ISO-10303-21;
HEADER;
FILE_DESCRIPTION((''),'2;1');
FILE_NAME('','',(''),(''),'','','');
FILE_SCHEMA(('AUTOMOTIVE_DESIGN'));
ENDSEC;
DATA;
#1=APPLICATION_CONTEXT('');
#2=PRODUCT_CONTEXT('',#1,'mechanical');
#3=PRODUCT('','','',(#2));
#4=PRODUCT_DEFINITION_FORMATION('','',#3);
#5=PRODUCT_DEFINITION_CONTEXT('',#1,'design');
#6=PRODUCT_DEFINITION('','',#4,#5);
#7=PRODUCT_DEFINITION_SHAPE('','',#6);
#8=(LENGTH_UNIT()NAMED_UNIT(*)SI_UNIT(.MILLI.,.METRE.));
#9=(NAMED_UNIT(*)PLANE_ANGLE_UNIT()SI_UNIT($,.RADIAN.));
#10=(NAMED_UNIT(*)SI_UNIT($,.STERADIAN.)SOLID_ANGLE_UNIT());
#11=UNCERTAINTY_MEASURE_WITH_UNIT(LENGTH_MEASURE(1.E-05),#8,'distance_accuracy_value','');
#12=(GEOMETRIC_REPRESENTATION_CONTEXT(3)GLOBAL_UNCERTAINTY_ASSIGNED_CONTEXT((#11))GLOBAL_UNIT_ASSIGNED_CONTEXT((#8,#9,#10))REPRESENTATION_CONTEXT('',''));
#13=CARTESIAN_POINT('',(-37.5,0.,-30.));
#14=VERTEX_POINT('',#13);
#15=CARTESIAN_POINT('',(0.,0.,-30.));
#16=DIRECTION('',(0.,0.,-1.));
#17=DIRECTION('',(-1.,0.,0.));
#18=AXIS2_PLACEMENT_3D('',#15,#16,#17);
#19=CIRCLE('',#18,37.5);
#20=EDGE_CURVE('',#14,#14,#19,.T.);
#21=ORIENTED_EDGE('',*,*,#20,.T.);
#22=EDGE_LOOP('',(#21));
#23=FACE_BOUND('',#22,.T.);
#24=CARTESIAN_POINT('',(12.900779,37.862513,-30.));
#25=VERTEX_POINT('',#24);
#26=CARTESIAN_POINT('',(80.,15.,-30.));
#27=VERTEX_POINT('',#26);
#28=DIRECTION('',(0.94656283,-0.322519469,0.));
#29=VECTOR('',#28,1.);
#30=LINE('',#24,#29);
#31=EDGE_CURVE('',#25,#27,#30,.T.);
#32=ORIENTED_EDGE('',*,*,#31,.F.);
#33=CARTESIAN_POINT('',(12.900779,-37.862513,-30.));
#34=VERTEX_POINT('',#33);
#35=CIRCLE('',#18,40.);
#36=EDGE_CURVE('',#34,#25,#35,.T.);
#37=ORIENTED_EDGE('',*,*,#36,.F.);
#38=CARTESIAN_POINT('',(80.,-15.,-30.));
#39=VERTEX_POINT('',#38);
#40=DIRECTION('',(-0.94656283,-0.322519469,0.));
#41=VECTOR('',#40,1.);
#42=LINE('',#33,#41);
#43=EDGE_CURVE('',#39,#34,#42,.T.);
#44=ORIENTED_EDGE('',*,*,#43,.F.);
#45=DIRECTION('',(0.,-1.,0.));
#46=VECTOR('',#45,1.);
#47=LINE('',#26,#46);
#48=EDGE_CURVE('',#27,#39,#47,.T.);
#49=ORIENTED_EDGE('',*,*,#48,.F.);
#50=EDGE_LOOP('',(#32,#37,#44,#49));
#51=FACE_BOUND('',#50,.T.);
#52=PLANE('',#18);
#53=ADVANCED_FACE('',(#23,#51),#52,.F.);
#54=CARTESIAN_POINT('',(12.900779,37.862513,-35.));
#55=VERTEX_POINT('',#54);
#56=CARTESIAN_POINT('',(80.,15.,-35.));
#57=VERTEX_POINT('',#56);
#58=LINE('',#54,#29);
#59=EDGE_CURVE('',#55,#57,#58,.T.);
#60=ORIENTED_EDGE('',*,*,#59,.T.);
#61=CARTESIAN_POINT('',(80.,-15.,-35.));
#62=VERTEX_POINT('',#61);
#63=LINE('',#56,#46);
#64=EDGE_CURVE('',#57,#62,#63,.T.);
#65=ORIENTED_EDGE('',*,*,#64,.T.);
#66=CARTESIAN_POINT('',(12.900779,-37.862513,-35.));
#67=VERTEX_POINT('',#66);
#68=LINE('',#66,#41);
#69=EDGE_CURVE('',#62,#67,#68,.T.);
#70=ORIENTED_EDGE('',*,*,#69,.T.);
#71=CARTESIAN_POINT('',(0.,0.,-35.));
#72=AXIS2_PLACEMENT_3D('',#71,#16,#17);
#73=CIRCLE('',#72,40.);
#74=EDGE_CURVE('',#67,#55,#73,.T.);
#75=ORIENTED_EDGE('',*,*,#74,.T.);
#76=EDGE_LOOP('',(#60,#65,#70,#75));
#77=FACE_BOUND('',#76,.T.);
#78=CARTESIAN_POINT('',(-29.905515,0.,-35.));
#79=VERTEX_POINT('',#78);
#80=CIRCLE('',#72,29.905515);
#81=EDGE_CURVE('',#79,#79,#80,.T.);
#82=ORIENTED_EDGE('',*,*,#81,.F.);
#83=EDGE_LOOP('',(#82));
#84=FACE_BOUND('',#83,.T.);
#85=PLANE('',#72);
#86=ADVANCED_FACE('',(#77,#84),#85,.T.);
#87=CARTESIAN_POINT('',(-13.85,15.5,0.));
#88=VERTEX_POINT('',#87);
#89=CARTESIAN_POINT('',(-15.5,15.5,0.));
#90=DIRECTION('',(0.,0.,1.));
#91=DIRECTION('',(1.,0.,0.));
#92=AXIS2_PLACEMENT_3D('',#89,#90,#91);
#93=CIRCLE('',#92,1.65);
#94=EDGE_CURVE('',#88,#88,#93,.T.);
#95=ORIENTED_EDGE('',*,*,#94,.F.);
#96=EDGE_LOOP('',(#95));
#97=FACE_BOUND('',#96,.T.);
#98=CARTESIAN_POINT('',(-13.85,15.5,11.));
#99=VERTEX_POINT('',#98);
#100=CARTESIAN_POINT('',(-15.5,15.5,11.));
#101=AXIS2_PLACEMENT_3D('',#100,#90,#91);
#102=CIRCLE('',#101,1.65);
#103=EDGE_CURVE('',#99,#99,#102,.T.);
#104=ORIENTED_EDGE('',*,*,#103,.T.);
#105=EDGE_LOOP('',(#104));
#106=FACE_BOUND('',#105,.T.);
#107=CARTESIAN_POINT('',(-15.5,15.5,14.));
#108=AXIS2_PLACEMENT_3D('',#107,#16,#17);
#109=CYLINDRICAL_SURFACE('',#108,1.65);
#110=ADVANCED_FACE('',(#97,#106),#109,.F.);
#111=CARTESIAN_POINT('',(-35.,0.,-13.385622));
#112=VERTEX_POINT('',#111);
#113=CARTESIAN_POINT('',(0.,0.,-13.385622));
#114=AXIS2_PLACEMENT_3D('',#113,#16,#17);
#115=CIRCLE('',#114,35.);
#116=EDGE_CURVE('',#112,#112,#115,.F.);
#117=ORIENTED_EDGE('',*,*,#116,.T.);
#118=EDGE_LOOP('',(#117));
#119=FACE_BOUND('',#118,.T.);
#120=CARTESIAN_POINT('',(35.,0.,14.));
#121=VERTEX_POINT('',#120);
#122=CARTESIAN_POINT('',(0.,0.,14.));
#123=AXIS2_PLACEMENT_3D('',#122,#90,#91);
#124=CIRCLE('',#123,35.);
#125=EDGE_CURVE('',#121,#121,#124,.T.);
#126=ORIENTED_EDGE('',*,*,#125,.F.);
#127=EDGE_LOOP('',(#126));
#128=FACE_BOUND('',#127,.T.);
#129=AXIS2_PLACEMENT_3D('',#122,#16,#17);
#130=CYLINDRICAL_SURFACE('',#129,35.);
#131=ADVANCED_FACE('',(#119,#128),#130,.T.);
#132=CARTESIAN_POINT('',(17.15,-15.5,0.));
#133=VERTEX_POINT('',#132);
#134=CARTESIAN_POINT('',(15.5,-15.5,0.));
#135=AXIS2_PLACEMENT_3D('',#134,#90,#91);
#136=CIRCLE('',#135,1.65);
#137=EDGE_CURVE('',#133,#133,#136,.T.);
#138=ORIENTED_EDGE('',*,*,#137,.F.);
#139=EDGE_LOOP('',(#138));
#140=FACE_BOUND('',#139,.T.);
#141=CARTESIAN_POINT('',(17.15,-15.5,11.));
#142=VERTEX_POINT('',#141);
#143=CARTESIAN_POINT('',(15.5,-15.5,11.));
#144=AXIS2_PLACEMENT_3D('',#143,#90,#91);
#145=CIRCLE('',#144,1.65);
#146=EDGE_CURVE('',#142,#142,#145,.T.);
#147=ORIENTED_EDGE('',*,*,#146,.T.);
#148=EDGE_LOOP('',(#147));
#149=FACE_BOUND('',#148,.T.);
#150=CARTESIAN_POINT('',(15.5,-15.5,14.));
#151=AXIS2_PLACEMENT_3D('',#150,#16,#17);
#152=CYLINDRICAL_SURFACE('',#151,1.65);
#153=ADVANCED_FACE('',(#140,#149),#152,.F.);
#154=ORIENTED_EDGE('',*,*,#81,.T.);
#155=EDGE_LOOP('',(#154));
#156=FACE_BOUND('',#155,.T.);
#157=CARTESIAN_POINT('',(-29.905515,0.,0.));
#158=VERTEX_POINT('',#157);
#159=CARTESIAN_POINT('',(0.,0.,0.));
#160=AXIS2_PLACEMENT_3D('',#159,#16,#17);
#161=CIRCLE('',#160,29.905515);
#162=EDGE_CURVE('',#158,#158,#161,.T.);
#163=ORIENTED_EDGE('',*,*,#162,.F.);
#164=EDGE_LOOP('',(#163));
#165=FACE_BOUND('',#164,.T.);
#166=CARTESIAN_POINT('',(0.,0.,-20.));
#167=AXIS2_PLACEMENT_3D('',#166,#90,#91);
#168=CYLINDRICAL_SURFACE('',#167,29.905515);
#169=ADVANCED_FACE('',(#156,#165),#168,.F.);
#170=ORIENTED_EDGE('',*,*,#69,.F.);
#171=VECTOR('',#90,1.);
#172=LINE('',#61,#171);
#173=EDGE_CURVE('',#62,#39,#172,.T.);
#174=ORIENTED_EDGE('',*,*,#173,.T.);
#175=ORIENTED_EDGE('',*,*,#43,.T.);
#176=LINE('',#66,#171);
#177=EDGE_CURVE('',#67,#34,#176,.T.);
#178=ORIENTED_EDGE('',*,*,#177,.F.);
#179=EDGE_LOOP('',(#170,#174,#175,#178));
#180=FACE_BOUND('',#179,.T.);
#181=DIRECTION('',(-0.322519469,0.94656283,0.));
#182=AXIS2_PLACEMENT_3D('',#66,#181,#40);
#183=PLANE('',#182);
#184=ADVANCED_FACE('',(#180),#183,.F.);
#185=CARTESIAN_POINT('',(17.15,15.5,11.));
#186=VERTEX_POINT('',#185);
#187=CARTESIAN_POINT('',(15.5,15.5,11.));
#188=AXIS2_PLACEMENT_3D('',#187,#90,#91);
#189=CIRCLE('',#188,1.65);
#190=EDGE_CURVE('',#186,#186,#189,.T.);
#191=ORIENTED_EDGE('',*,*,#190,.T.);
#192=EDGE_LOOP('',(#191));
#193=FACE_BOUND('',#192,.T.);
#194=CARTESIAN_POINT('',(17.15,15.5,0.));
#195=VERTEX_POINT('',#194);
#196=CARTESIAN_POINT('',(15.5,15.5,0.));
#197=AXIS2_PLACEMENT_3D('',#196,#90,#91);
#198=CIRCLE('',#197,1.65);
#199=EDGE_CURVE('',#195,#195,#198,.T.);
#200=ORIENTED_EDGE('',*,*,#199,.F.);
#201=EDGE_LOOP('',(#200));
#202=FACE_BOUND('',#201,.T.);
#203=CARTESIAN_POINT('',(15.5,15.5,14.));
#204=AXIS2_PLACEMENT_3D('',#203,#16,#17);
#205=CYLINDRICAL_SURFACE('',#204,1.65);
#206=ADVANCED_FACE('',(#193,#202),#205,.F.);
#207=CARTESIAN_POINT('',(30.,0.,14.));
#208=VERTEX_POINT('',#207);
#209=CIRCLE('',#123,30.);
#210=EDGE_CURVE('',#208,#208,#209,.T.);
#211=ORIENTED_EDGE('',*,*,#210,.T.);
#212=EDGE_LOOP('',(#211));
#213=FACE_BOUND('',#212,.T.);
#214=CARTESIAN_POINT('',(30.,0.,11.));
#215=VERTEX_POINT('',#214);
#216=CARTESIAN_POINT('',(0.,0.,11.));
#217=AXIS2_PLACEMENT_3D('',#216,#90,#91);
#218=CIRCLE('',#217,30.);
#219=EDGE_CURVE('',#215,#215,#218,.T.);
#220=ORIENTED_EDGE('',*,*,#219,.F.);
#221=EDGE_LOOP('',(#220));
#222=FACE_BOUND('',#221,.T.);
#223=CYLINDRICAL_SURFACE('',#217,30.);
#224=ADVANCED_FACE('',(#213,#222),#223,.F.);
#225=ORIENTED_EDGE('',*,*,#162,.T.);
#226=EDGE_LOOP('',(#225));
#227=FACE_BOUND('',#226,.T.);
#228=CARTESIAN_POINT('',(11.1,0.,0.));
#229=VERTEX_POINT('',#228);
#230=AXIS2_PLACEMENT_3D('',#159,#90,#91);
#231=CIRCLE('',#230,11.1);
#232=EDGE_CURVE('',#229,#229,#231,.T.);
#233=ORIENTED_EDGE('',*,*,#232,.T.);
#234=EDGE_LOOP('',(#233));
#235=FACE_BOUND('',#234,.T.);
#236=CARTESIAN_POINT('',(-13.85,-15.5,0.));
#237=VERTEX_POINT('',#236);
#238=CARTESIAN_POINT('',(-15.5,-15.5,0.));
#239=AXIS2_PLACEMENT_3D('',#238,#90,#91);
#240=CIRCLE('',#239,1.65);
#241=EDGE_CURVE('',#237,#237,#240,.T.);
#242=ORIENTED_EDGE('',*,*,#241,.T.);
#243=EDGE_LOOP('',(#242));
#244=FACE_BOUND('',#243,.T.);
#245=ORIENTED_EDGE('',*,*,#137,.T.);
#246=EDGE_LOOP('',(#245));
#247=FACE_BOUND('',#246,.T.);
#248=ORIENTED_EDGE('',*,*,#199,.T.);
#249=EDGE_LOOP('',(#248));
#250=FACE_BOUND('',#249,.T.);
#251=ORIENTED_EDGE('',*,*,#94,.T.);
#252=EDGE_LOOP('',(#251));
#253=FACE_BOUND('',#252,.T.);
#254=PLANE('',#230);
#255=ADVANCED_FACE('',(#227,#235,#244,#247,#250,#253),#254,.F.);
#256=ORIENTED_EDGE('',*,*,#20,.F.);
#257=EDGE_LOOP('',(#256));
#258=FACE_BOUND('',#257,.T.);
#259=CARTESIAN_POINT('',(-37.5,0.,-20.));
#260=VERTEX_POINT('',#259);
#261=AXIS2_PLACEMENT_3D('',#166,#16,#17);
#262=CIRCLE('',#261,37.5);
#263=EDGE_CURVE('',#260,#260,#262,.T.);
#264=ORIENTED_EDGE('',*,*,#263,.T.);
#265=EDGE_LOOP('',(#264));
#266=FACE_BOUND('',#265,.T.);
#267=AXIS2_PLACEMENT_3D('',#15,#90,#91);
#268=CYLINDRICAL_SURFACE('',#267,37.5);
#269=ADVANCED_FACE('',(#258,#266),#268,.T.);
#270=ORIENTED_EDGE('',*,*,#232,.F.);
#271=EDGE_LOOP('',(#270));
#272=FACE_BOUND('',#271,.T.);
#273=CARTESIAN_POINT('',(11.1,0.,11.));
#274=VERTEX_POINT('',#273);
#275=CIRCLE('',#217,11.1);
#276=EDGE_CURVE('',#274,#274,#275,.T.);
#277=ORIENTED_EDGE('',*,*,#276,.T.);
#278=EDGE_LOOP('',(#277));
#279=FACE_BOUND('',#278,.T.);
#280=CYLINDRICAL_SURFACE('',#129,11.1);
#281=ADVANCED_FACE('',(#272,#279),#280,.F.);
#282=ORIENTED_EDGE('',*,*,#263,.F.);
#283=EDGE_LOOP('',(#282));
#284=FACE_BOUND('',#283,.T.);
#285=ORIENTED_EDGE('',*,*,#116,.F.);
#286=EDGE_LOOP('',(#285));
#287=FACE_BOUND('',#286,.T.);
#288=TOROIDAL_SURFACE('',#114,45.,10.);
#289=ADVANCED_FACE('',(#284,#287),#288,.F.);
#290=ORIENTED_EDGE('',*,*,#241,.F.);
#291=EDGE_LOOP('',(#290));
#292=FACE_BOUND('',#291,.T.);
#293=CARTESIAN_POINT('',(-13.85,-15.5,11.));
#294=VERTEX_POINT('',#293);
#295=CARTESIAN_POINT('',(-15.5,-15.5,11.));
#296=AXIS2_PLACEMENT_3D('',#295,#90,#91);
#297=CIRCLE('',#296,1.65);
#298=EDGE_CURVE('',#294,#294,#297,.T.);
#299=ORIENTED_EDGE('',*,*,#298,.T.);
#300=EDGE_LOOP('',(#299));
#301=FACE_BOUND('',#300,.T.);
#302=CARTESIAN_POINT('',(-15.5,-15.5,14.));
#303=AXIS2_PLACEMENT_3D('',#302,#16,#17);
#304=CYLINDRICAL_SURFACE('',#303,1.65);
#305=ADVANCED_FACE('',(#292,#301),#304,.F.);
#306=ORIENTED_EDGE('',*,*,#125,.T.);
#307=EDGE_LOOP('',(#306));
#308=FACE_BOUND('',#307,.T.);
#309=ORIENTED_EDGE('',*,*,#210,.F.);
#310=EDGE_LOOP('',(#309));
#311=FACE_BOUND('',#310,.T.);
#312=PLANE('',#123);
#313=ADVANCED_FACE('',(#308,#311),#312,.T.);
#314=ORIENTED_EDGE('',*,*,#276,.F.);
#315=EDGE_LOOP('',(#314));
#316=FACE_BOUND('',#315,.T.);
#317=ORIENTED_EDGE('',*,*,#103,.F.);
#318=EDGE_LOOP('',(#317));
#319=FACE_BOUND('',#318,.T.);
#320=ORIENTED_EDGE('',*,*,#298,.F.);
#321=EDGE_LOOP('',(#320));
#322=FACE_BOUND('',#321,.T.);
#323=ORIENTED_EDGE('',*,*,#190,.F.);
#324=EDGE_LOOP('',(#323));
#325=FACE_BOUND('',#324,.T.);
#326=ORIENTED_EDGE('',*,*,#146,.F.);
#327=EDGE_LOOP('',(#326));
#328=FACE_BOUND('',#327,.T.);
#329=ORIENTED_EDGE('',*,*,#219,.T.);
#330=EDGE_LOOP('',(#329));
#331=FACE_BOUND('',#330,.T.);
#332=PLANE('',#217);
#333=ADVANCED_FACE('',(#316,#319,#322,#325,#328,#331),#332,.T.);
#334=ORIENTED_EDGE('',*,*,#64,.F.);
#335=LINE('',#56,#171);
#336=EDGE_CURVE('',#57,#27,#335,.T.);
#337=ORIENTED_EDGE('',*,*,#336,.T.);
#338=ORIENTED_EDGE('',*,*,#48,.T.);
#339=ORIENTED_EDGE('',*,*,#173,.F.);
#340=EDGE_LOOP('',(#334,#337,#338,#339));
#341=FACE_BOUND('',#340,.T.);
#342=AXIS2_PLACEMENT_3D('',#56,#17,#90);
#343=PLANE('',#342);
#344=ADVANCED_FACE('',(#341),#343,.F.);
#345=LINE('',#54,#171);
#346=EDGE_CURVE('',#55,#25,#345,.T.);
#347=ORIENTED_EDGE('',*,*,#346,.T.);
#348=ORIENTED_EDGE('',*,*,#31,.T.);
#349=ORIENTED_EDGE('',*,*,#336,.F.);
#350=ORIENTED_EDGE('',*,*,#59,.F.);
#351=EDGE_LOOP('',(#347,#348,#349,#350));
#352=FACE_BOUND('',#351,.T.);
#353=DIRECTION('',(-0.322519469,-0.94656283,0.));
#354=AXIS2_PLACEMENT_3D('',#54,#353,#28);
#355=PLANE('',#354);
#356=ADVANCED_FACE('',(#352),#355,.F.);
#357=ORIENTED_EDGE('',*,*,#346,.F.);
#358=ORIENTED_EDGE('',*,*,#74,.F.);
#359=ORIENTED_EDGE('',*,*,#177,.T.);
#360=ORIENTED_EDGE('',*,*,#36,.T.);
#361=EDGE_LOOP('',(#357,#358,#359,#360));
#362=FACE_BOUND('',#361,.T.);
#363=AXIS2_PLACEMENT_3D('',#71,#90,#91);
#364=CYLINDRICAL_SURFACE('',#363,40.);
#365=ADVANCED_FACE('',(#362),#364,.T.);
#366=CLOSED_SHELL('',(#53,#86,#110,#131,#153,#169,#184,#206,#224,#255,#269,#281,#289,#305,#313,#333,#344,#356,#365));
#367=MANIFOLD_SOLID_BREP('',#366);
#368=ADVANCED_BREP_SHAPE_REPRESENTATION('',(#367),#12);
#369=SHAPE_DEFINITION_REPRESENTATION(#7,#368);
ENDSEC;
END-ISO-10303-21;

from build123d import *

# Parameters (mm, degrees)
ESQUISSE1_R             = 35
ESQUISSE1_R_2           = 11.1
ESQUISSE1_R_3           = 1.65
BOSS_EXTRU_1_DEPTH      = 14
BOSS_EXTRU_5_START      = 20
ESQUISSE2_R             = 35
ESQUISSE2_R_2           = 29.905514519
BOSS_EXTRU_5_DEPTH      = 20
BOSS_EXTRU_6_START      = 10
ESQUISSE5_R             = 37.5
ESQUISSE5_R_2           = 29.905514519
BOSS_EXTRU_6_DEPTH      = 10
CONG_1_R                = 10
BOSS_EXTRU_7_START      = 5
ESQUISSE6_R             = 29.905514519
BOSS_EXTRU_7_DEPTH      = 5
ESQUISSE7_R             = 30
ENL_V_MAT_EXTRU_1_DEPTH = 3


with BuildPart() as part:
    # Esquisse1 → Boss.-Extru.1 (new body)
    with BuildSketch(Plane.XY):
        Circle(ESQUISSE1_R)
        Circle(ESQUISSE1_R_2, mode=Mode.SUBTRACT)
        with Locations((-15.5, 15.5)):
            Circle(ESQUISSE1_R_3, mode=Mode.SUBTRACT)
        with Locations((15.5, 15.5)):
            Circle(ESQUISSE1_R_3, mode=Mode.SUBTRACT)
        with Locations((15.5, -15.5)):
            Circle(ESQUISSE1_R_3, mode=Mode.SUBTRACT)
        with Locations((-15.5, -15.5)):
            Circle(ESQUISSE1_R_3, mode=Mode.SUBTRACT)
    extrude(amount=BOSS_EXTRU_1_DEPTH)

    # Esquisse2 → Boss.-Extru.5 (add)
    with BuildSketch(Plane(origin=(0, 0, 0), x_dir=(-1, 0, 0), z_dir=(0, 0, -1)).offset(BOSS_EXTRU_5_START)):
        Circle(ESQUISSE2_R)
        Circle(ESQUISSE2_R_2, mode=Mode.SUBTRACT)
    extrude(amount=-BOSS_EXTRU_5_DEPTH)

    # Esquisse5 → Boss.-Extru.6 (add)
    with BuildSketch(Plane(origin=(0, 0, -20), x_dir=(-1, 0, 0), z_dir=(0, 0, -1)).offset(BOSS_EXTRU_6_START)):
        Circle(ESQUISSE5_R)
        Circle(ESQUISSE5_R_2, mode=Mode.SUBTRACT)
    extrude(amount=-BOSS_EXTRU_6_DEPTH)

    # Congé1
    # the kernel refuses this fillet: 10 mm, written as the material it adds along each edge
    with BuildSketch(Plane(origin=(0, 0, -20), x_dir=(-1, 0, 0), z_dir=(0, -1, 0))) as cong_1_piece_1:
        with BuildLine():
            CenterArc((45, -6.614378278), CONG_1_R, 138.590377891, 41.409622109)
            Line((37.5, 0), (37.35, 0.132287566))
            ThreePointArc((37.35, 0.132287566), (36.25, 0.2), (35, 0.2))
            Line((35, 0.2), (34.8, 0))
            Line((34.8, 0), (34.8, -6.614378278))
            Line((34.8, -6.614378278), (35, -6.614378278))
        make_face()
    revolve(axis=Axis((0, 0, -20), (0, 0, -1)))

    # Esquisse6 → Boss.-Extru.7 (add)
    with BuildSketch(Plane(origin=(0, 0, -30), x_dir=(-1, 0, 0), z_dir=(0, 0, -1)).offset(BOSS_EXTRU_7_START)):
        with BuildLine():
            Line((-12.900778772, 37.862513217), (-80, 15))
            Line((-80, 15), (-80, -15))
            Line((-80, -15), (-12.900778772, -37.862513217))
            ThreePointArc((-12.900778772, -37.862513217), (40, 0), (-12.900778772, 37.862513217))
        make_face()
        Circle(ESQUISSE6_R, mode=Mode.SUBTRACT)
    extrude(amount=-BOSS_EXTRU_7_DEPTH)

    # Esquisse7 → Enlèv. mat.-Extru.1 (cut)
    with BuildSketch(Plane.XY.offset(14)):
        Circle(ESQUISSE7_R)
    extrude(amount=-ENL_V_MAT_EXTRU_1_DEPTH, mode=Mode.SUBTRACT)


solid = part.part
